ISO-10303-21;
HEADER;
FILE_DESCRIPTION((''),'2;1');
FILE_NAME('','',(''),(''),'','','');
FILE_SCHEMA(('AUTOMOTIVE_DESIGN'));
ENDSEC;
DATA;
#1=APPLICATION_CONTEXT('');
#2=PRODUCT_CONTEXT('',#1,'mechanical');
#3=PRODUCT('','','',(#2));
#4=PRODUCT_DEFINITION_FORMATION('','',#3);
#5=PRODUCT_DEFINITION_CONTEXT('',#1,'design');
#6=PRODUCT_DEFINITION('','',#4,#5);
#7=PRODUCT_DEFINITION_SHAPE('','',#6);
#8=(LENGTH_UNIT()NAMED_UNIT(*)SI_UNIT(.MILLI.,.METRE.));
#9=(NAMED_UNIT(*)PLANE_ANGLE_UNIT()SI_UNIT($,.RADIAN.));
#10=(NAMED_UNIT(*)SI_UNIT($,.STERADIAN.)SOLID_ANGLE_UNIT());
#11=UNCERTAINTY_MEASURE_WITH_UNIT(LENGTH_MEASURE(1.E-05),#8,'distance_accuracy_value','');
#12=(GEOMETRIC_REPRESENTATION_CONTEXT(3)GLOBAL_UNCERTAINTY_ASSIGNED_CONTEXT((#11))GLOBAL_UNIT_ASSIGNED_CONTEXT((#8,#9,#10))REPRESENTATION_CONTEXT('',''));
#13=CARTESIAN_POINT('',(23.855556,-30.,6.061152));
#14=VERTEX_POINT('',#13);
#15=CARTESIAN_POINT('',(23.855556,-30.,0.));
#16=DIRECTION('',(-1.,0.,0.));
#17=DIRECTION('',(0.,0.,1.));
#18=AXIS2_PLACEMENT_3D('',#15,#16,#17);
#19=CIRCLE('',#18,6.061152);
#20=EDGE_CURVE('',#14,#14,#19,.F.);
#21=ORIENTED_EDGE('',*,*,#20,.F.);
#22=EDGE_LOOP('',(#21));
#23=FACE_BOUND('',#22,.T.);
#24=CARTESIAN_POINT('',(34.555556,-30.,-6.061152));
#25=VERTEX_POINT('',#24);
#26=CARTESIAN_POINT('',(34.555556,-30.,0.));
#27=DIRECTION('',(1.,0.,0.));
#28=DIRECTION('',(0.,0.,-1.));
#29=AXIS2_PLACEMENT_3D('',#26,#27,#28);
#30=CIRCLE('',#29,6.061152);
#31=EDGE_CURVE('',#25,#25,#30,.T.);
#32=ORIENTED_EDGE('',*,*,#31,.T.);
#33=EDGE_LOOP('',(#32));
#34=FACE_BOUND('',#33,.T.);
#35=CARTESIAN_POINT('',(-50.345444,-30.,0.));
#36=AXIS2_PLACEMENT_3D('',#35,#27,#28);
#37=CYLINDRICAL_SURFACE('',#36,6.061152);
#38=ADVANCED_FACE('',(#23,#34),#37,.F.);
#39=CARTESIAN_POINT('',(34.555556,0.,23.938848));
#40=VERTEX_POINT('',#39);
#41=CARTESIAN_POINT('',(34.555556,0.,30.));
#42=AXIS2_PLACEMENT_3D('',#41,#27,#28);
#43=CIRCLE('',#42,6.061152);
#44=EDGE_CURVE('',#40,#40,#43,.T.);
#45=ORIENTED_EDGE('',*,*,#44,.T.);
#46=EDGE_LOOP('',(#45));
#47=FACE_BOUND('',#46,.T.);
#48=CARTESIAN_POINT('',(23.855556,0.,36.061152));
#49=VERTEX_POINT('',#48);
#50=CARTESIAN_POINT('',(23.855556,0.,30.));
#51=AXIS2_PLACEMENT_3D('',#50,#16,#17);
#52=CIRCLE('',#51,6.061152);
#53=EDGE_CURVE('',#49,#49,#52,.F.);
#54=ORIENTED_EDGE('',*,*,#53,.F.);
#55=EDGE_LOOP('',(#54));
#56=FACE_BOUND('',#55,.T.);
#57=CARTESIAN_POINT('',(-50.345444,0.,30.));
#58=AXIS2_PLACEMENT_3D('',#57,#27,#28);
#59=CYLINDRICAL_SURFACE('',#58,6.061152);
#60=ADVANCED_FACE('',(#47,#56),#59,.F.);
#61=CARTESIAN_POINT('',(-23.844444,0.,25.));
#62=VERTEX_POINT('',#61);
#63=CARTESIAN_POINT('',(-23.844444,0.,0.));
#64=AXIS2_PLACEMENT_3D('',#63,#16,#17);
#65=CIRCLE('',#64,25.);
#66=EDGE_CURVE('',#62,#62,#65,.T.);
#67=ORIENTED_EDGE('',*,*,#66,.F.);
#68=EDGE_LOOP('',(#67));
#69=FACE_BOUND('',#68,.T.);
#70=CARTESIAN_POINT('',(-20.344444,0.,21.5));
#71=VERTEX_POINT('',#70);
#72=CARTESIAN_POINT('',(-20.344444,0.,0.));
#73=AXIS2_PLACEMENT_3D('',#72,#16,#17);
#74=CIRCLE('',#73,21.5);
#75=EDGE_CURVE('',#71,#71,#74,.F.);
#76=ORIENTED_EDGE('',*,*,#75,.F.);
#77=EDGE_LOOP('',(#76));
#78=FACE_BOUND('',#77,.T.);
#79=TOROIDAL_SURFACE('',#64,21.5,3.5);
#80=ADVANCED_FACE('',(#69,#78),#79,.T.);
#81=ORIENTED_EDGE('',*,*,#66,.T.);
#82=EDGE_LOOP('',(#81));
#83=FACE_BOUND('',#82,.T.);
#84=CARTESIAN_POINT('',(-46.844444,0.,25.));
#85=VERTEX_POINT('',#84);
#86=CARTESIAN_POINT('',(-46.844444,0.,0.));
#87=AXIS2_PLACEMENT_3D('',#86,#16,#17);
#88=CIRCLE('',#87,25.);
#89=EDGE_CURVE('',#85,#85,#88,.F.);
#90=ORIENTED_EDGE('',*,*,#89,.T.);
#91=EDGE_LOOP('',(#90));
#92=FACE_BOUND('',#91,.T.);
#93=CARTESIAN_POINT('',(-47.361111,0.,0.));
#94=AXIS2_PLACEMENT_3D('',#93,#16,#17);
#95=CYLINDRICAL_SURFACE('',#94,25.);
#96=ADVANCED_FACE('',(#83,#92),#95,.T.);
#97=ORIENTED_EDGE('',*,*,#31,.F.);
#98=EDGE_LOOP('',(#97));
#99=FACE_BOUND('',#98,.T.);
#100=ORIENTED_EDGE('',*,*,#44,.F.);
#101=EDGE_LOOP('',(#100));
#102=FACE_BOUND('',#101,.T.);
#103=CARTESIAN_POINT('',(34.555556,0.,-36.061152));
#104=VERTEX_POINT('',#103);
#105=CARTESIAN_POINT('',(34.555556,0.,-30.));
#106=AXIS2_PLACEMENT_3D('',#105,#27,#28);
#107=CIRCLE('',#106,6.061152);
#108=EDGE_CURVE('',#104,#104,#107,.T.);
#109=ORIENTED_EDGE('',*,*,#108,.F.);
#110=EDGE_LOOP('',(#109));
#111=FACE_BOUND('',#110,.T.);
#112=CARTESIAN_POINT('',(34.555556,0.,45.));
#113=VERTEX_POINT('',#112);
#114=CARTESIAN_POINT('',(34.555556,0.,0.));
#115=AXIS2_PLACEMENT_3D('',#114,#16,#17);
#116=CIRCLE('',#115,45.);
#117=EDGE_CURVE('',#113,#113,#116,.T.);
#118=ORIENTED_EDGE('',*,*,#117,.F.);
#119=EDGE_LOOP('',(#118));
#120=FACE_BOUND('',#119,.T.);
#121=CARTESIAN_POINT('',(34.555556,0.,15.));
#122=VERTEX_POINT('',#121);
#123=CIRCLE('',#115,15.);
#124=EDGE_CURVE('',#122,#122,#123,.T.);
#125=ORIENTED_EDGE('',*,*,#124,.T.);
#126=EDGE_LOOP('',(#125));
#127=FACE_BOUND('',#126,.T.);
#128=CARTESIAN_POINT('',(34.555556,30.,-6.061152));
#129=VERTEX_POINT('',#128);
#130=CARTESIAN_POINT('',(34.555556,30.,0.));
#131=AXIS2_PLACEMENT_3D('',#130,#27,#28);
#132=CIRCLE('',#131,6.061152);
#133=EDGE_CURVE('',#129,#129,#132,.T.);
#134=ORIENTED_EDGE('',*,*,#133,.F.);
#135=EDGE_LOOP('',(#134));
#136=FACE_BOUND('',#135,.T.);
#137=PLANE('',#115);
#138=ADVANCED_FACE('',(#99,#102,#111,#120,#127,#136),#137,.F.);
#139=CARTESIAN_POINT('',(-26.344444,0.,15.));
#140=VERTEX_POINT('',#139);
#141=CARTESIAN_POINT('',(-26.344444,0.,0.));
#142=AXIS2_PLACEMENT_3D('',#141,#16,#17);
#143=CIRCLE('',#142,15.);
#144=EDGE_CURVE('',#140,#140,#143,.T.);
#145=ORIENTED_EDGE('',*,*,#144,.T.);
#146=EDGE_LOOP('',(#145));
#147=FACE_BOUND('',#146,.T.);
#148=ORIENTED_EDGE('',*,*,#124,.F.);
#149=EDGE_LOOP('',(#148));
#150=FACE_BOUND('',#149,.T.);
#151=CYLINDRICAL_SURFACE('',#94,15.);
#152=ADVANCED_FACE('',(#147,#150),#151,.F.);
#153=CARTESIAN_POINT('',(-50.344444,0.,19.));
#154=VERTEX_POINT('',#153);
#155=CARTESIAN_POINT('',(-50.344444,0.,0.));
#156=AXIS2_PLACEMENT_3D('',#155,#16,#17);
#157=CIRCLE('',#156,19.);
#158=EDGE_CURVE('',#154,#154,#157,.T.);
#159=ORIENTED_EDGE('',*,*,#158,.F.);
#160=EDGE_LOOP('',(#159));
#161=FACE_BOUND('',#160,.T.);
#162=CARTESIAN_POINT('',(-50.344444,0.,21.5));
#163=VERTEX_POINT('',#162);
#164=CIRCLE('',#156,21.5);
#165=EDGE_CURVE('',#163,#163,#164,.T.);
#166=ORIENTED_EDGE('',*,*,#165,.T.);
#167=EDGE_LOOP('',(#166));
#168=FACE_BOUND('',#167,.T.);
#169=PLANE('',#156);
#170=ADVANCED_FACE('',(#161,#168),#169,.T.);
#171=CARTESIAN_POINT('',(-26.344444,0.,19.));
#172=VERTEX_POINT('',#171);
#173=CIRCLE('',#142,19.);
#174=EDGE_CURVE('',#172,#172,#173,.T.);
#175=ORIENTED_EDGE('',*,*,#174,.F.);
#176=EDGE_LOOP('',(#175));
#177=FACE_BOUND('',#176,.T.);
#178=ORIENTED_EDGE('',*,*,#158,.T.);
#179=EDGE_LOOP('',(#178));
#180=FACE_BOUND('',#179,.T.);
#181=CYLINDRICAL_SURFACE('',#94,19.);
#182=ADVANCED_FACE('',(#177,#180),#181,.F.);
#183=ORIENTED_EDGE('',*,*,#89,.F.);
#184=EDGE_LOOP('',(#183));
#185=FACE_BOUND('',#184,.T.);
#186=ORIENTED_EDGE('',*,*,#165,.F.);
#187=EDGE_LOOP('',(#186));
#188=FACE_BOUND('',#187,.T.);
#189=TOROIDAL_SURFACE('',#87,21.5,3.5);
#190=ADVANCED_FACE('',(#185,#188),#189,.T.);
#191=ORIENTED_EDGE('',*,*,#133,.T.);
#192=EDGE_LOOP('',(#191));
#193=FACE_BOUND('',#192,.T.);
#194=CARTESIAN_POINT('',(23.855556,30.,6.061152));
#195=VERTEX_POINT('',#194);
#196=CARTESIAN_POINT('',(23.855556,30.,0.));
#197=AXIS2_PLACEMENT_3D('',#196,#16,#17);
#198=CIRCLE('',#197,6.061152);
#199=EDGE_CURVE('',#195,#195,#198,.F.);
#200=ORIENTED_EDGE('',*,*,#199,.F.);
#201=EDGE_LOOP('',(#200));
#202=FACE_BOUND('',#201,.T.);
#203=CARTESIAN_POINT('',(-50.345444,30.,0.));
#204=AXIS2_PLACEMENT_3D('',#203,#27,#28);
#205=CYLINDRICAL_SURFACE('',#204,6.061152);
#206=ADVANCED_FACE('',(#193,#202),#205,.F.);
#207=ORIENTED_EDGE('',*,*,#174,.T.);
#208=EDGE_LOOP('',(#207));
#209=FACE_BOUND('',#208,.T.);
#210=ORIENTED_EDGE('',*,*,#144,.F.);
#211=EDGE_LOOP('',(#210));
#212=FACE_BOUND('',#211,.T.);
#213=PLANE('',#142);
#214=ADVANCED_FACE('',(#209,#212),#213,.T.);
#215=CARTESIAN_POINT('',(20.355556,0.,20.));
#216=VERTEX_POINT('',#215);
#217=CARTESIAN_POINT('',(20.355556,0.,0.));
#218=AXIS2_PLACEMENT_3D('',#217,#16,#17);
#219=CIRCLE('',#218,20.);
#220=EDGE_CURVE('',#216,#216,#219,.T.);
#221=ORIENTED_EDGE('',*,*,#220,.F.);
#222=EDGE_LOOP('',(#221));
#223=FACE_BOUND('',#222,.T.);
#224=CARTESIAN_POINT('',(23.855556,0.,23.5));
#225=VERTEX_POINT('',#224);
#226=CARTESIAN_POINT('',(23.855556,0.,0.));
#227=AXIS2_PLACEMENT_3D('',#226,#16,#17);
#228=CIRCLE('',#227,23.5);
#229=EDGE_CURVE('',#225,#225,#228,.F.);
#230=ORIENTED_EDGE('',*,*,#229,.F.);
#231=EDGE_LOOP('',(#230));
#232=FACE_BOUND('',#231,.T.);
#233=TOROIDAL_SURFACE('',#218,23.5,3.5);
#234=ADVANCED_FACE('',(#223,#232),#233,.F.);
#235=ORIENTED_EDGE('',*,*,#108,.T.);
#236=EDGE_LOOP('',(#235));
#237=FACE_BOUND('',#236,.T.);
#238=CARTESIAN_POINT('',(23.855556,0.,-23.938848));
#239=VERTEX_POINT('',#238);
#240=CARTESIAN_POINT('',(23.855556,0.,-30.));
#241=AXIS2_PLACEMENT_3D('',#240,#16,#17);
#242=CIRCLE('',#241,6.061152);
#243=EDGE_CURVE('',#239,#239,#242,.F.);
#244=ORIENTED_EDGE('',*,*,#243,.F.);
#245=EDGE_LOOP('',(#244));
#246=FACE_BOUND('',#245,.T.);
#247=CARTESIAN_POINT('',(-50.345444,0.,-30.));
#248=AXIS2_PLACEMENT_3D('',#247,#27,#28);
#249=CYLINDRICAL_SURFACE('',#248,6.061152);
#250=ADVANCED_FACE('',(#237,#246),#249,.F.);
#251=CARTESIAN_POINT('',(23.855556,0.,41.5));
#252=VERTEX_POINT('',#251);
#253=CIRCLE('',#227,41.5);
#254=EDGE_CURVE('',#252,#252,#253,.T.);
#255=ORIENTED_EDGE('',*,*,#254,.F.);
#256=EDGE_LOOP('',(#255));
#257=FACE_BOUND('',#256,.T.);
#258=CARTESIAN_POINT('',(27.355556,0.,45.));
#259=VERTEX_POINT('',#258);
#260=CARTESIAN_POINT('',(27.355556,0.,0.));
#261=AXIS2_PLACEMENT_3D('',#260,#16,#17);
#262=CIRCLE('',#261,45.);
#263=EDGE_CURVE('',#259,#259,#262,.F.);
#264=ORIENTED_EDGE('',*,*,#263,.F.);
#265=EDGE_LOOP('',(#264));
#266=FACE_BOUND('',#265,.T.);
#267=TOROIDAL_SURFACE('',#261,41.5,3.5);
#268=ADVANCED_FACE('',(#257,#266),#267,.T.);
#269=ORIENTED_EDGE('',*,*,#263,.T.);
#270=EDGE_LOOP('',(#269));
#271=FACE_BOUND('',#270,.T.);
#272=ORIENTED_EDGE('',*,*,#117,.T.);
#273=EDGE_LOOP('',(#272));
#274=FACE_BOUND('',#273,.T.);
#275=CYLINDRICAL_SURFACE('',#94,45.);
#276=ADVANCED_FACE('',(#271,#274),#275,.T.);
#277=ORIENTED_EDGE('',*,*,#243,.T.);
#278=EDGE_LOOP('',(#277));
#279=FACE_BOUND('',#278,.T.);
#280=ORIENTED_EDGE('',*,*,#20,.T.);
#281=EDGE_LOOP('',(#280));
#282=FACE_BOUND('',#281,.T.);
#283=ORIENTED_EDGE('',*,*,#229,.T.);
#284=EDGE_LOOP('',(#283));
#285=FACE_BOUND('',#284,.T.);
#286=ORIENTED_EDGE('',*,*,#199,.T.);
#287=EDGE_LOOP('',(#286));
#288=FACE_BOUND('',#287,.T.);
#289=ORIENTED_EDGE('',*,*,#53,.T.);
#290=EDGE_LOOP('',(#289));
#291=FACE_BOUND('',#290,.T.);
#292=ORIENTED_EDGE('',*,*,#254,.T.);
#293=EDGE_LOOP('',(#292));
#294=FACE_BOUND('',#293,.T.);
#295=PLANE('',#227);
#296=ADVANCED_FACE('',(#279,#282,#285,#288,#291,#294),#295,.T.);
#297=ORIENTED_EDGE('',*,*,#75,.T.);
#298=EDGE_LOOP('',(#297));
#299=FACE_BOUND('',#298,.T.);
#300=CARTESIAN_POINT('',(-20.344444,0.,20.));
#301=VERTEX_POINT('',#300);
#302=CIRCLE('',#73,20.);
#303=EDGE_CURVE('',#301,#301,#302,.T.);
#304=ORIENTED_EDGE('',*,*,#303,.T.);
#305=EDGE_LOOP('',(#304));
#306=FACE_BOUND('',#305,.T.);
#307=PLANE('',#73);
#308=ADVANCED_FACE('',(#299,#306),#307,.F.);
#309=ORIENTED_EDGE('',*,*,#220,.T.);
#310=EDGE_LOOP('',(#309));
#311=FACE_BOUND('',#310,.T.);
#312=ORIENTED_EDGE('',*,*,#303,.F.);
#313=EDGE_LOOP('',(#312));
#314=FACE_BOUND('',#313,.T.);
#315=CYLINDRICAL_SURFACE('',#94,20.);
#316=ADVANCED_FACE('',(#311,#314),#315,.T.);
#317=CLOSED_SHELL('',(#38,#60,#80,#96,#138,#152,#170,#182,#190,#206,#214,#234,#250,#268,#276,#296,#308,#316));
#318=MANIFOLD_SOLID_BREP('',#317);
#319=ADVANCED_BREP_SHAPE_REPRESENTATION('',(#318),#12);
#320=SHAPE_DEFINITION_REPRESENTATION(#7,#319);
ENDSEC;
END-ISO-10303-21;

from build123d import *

# Parameters (mm, degrees)
SKETCH2_W          = 10.7
SKETCH2_H          = 7.5
CUT_EXTRUDE2_REACH = 108.104
SKETCH5_R          = 6.061151683
FILLET2_R          = 3.5
FILLET3_R          = 3.5


with BuildPart() as part:
    # Sketch2 → Revolve5 (revolve)
    with BuildSketch(Plane(origin=(0, 0, 0), x_dir=(1, 0, 0), z_dir=(0, 1, 0))):
        Polygon((-50.344444444, 25), (-50.344444444, 19), (-26.344444444, 19), (-26.344444444, 15), (34.555555556, 15), (34.555555556, 25), (23.855555556, 25), (23.855555556, 20), (-20.344444444, 20), (-20.344444444, 25), align=None)
        Polygon((-26.344444444, -15), (-26.344444444, -19), (-50.344444444, -19), (-50.344444444, -25), (-20.344444444, -25), (-20.344444444, -20), (23.855555556, -20), (23.855555556, -45), (34.555555556, -45), (34.555555556, -15), align=None)
        with Locations((29.205555556, 41.25)):
            Rectangle(SKETCH2_W, SKETCH2_H)
    revolve(axis=Axis((-47.361111111, 0, 0), (1, 0, 0)))

    # Sketch5 → Cut-Extrude2 (cut, up to next)
    with BuildSketch(Plane(origin=(34.555555556, 0, 0), x_dir=(0, 0, -1), z_dir=(1, 0, 0)), mode=Mode.PRIVATE) as cut_extrude2_sk1:
        with Locations((0, 30)):
            Circle(SKETCH5_R)
    cut_extrude2_tool1 = extrude(cut_extrude2_sk1.sketch, amount=-CUT_EXTRUDE2_REACH, mode=Mode.PRIVATE) & part.part
    # Sketch5 → Cut-Extrude2 (cut, up to next)
    with BuildSketch(Plane(origin=(34.555555556, 0, 0), x_dir=(0, 0, -1), z_dir=(1, 0, 0)), mode=Mode.PRIVATE) as cut_extrude2_sk2:
        with Locations((30, 0)):
            Circle(SKETCH5_R)
    cut_extrude2_tool2 = extrude(cut_extrude2_sk2.sketch, amount=-CUT_EXTRUDE2_REACH, mode=Mode.PRIVATE) & part.part
    # Sketch5 → Cut-Extrude2 (cut, up to next)
    with BuildSketch(Plane(origin=(34.555555556, 0, 0), x_dir=(0, 0, -1), z_dir=(1, 0, 0)), mode=Mode.PRIVATE) as cut_extrude2_sk3:
        with Locations((0, -30)):
            Circle(SKETCH5_R)
    cut_extrude2_tool3 = extrude(cut_extrude2_sk3.sketch, amount=-CUT_EXTRUDE2_REACH, mode=Mode.PRIVATE) & part.part
    # Sketch5 → Cut-Extrude2 (cut, up to next)
    with BuildSketch(Plane(origin=(34.555555556, 0, 0), x_dir=(0, 0, -1), z_dir=(1, 0, 0)), mode=Mode.PRIVATE) as cut_extrude2_sk4:
        with Locations((-30, 0)):
            Circle(SKETCH5_R)
    cut_extrude2_tool4 = extrude(cut_extrude2_sk4.sketch, amount=-CUT_EXTRUDE2_REACH, mode=Mode.PRIVATE) & part.part
    add(cut_extrude2_tool1.solids().sort_by_distance((34.555556, 30, 0))[0], mode=Mode.SUBTRACT)
    add(cut_extrude2_tool2.solids().sort_by_distance((34.555556, 0, -30))[0], mode=Mode.SUBTRACT)
    add(cut_extrude2_tool3.solids().sort_by_distance((34.555556, -30, 0))[0], mode=Mode.SUBTRACT)
    add(cut_extrude2_tool4.solids().sort_by_distance((34.555556, 0, 30))[0], mode=Mode.SUBTRACT)

    # Fillet2
    fillet2_edges = [part.edges().sort_by_distance(p)[0] for p in [
        (-20.344444444, 0, 25),
    ]]
    fillet(fillet2_edges, radius=FILLET2_R)

    # Fillet3
    fillet3_edges = [part.edges().sort_by_distance(p)[0] for p in [
        (23.855555556, 0, -45),
        (23.855555556, 0, 20),
        (-50.344444444, 0, 25),
    ]]
    fillet(fillet3_edges, radius=FILLET3_R)


solid = part.part
